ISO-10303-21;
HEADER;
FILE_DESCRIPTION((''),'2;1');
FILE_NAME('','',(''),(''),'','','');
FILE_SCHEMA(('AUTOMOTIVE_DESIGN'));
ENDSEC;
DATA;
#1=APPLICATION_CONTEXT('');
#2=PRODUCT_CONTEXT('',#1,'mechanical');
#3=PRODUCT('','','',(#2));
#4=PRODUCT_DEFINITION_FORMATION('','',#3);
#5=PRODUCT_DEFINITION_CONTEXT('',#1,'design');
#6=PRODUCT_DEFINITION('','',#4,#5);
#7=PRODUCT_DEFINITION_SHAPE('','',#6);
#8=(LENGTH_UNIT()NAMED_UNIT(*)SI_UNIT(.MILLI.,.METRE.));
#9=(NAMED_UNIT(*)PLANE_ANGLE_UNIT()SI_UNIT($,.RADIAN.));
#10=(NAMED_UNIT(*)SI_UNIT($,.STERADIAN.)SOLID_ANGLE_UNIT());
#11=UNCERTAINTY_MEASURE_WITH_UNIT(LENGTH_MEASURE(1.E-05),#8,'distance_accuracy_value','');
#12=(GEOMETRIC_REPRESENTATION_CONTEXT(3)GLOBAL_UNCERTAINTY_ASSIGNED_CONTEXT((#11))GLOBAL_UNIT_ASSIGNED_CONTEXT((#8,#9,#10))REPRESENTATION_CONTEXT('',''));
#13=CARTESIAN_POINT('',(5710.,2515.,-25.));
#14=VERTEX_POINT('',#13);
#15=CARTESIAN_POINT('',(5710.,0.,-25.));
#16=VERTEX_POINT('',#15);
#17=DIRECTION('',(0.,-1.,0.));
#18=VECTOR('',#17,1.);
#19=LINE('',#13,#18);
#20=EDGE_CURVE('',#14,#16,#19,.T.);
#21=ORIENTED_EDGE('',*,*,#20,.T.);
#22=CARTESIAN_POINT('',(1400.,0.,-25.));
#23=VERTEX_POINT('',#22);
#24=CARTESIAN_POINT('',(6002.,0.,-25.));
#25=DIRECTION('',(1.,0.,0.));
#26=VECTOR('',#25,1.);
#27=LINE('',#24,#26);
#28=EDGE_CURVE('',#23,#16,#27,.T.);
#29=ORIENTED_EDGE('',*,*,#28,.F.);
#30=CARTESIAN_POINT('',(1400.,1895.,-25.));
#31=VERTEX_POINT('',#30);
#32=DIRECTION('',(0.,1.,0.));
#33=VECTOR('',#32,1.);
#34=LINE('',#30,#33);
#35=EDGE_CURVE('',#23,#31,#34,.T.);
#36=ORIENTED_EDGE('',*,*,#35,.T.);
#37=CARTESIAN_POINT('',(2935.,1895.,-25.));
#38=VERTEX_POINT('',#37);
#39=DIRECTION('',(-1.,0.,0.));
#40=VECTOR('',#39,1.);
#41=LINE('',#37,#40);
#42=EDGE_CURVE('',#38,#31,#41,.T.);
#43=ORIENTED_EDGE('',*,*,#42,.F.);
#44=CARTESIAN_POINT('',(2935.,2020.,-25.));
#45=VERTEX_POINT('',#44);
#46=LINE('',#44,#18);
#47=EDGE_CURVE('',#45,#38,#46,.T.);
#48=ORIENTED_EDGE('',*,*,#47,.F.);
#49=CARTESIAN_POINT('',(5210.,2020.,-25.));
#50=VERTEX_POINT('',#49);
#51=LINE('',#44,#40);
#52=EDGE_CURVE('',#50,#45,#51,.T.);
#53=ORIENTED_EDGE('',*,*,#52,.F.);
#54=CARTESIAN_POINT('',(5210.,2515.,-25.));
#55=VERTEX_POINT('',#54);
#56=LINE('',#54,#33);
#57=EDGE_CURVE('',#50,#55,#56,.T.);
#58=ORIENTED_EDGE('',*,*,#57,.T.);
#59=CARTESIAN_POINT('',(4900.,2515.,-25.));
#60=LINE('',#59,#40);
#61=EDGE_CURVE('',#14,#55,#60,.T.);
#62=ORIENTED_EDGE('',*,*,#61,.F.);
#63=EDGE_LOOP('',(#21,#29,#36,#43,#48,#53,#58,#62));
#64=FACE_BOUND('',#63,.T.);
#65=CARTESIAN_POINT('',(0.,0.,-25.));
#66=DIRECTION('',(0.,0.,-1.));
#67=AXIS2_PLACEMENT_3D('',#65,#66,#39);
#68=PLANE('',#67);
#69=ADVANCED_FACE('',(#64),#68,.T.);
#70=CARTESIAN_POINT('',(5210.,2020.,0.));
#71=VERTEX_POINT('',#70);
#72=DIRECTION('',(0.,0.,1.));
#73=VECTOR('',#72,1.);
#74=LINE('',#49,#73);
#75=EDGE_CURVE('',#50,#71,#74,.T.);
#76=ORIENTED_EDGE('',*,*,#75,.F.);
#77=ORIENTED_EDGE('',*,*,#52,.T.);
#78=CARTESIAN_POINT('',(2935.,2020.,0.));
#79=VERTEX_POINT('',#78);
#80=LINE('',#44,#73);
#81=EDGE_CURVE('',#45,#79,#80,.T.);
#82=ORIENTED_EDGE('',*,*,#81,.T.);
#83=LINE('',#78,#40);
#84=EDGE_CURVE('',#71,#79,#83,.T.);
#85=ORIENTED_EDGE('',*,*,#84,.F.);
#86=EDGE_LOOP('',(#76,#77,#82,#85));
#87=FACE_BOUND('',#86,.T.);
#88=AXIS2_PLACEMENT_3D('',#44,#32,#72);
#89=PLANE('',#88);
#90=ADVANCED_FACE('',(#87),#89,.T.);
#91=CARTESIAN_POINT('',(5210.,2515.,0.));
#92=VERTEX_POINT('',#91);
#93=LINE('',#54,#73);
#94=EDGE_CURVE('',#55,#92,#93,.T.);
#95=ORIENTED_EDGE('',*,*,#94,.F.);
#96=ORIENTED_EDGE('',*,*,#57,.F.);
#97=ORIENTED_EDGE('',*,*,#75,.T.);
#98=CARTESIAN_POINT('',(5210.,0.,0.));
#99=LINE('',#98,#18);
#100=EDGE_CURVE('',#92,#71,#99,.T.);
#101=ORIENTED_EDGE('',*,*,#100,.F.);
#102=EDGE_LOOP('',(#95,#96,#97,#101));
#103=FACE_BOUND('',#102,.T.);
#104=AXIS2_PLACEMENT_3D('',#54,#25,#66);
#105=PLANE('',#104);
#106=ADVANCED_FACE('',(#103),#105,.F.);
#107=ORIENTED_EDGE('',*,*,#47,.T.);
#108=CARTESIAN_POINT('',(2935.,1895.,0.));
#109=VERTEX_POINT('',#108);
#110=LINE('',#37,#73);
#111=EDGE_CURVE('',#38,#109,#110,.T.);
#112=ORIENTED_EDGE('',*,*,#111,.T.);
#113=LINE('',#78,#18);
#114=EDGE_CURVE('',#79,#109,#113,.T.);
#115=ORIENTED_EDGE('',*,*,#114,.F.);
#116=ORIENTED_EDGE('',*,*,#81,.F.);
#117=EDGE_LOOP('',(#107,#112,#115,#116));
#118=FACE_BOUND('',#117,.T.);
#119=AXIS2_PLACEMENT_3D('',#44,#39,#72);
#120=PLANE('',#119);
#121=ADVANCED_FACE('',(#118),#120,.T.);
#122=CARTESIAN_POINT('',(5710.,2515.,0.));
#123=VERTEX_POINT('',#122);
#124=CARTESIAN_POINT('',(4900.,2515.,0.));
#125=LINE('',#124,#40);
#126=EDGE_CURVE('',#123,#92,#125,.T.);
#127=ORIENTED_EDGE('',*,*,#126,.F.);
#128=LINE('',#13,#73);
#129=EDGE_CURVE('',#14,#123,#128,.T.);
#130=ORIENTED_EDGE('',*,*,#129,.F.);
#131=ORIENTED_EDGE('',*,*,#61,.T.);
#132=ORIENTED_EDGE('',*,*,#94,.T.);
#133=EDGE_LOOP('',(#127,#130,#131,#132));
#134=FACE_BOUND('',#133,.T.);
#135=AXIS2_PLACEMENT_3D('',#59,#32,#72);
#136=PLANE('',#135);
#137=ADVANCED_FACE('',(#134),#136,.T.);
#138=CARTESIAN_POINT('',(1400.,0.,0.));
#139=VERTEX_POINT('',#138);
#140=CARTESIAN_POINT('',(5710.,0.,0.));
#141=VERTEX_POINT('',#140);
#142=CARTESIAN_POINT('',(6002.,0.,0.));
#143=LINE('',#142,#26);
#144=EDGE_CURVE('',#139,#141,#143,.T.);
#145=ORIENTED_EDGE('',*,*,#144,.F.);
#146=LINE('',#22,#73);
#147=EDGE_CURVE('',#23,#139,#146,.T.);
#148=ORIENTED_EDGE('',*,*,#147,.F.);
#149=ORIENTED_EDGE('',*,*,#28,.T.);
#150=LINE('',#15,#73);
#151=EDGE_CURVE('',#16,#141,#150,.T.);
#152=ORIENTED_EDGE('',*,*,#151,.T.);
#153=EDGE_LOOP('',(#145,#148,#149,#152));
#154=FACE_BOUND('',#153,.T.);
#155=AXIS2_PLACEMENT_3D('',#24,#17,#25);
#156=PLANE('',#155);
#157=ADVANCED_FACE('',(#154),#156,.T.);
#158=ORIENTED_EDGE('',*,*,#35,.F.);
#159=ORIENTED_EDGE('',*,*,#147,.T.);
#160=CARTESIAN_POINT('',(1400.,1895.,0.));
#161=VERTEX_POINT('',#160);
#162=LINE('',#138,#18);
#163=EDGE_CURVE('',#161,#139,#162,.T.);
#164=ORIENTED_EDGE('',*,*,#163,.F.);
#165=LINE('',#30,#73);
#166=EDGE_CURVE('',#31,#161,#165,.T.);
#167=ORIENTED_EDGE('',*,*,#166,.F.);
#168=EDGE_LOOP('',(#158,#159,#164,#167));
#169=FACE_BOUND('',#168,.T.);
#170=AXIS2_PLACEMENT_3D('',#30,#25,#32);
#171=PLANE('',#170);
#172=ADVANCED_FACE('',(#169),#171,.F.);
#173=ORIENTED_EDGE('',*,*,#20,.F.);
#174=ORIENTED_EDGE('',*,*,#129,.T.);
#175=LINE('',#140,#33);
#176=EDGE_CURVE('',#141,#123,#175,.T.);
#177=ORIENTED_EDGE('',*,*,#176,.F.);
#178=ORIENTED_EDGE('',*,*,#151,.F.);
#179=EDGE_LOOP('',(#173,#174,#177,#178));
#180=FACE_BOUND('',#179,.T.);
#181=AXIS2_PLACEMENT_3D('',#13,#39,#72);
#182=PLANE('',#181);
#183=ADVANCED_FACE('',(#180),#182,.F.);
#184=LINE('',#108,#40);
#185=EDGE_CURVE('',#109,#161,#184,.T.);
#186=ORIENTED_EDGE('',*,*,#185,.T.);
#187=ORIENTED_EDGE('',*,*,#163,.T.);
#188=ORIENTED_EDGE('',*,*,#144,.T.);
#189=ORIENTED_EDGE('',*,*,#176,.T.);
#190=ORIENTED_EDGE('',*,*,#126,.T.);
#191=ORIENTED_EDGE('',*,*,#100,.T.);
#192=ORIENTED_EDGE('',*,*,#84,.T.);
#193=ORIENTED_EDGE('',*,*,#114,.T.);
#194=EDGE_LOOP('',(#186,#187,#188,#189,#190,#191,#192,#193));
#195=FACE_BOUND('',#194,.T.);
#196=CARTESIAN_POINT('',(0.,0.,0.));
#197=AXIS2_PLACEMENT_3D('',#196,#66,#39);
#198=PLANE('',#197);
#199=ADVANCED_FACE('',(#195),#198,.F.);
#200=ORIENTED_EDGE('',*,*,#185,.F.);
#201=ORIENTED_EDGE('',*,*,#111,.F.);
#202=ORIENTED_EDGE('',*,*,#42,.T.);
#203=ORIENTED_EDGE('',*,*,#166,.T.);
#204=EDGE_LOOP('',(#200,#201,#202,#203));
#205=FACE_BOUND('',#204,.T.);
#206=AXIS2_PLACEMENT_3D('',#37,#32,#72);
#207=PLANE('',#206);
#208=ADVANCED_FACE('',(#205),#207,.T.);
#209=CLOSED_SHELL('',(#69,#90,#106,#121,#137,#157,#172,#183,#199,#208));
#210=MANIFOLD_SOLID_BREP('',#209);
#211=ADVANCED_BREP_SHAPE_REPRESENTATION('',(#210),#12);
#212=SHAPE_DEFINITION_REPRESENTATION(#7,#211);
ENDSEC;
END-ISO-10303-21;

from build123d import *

# Parameters (mm, degrees)
TABAN_FLAN_1_DEPTH         = 25
KES_EKSTR_ZYON1_DEPTH      = 6508.676543898
KES_EKSTR_ZYON1_DEPTH_BACK = 6508.676543898
IZIM7_W                    = 1400
IZIM7_H                    = 1895
IZIM7_W_2                  = 310
IZIM7_H_2                  = 495
KES_EKSTR_ZYON2_DEPTH      = 6508.676543898
KES_EKSTR_ZYON2_DEPTH_BACK = 6508.676543898
IZIM8_W                    = 292
IZIM8_H                    = 2515


# Sheet-metal steps are written as plain solids
with BuildPart() as part:
    # Çizim1 → Taban-Flanş1 (new body)
    with BuildSketch(Plane.XY):
        Polygon((0, 0), (0, 1895), (2935, 1895), (2935, 2020), (4900, 2020), (4900, 2515), (6002, 2515), (6002, 0), align=None)
    extrude(amount=-TABAN_FLAN_1_DEPTH)

    # Çizim7 → Kes-Ekstrüzyon1 (cut, two sides: drawn at the far end of the back side and taken through both)
    with BuildSketch(Plane.XY.offset(-KES_EKSTR_ZYON1_DEPTH_BACK)):
        with Locations((700, 947.5)):
            Rectangle(IZIM7_W, IZIM7_H)
        with Locations((5055, 2267.5)):
            Rectangle(IZIM7_W_2, IZIM7_H_2)
    extrude(amount=KES_EKSTR_ZYON1_DEPTH + KES_EKSTR_ZYON1_DEPTH_BACK, mode=Mode.SUBTRACT)

    # Çizim8 → Kes-Ekstrüzyon2 (cut, two sides: drawn at the far end of the back side and taken through both)
    with BuildSketch(Plane.XY.offset(-KES_EKSTR_ZYON2_DEPTH_BACK)):
        with Locations((5856, 1257.5)):
            Rectangle(IZIM8_W, IZIM8_H)
    extrude(amount=KES_EKSTR_ZYON2_DEPTH + KES_EKSTR_ZYON2_DEPTH_BACK, mode=Mode.SUBTRACT)


solid = part.part
